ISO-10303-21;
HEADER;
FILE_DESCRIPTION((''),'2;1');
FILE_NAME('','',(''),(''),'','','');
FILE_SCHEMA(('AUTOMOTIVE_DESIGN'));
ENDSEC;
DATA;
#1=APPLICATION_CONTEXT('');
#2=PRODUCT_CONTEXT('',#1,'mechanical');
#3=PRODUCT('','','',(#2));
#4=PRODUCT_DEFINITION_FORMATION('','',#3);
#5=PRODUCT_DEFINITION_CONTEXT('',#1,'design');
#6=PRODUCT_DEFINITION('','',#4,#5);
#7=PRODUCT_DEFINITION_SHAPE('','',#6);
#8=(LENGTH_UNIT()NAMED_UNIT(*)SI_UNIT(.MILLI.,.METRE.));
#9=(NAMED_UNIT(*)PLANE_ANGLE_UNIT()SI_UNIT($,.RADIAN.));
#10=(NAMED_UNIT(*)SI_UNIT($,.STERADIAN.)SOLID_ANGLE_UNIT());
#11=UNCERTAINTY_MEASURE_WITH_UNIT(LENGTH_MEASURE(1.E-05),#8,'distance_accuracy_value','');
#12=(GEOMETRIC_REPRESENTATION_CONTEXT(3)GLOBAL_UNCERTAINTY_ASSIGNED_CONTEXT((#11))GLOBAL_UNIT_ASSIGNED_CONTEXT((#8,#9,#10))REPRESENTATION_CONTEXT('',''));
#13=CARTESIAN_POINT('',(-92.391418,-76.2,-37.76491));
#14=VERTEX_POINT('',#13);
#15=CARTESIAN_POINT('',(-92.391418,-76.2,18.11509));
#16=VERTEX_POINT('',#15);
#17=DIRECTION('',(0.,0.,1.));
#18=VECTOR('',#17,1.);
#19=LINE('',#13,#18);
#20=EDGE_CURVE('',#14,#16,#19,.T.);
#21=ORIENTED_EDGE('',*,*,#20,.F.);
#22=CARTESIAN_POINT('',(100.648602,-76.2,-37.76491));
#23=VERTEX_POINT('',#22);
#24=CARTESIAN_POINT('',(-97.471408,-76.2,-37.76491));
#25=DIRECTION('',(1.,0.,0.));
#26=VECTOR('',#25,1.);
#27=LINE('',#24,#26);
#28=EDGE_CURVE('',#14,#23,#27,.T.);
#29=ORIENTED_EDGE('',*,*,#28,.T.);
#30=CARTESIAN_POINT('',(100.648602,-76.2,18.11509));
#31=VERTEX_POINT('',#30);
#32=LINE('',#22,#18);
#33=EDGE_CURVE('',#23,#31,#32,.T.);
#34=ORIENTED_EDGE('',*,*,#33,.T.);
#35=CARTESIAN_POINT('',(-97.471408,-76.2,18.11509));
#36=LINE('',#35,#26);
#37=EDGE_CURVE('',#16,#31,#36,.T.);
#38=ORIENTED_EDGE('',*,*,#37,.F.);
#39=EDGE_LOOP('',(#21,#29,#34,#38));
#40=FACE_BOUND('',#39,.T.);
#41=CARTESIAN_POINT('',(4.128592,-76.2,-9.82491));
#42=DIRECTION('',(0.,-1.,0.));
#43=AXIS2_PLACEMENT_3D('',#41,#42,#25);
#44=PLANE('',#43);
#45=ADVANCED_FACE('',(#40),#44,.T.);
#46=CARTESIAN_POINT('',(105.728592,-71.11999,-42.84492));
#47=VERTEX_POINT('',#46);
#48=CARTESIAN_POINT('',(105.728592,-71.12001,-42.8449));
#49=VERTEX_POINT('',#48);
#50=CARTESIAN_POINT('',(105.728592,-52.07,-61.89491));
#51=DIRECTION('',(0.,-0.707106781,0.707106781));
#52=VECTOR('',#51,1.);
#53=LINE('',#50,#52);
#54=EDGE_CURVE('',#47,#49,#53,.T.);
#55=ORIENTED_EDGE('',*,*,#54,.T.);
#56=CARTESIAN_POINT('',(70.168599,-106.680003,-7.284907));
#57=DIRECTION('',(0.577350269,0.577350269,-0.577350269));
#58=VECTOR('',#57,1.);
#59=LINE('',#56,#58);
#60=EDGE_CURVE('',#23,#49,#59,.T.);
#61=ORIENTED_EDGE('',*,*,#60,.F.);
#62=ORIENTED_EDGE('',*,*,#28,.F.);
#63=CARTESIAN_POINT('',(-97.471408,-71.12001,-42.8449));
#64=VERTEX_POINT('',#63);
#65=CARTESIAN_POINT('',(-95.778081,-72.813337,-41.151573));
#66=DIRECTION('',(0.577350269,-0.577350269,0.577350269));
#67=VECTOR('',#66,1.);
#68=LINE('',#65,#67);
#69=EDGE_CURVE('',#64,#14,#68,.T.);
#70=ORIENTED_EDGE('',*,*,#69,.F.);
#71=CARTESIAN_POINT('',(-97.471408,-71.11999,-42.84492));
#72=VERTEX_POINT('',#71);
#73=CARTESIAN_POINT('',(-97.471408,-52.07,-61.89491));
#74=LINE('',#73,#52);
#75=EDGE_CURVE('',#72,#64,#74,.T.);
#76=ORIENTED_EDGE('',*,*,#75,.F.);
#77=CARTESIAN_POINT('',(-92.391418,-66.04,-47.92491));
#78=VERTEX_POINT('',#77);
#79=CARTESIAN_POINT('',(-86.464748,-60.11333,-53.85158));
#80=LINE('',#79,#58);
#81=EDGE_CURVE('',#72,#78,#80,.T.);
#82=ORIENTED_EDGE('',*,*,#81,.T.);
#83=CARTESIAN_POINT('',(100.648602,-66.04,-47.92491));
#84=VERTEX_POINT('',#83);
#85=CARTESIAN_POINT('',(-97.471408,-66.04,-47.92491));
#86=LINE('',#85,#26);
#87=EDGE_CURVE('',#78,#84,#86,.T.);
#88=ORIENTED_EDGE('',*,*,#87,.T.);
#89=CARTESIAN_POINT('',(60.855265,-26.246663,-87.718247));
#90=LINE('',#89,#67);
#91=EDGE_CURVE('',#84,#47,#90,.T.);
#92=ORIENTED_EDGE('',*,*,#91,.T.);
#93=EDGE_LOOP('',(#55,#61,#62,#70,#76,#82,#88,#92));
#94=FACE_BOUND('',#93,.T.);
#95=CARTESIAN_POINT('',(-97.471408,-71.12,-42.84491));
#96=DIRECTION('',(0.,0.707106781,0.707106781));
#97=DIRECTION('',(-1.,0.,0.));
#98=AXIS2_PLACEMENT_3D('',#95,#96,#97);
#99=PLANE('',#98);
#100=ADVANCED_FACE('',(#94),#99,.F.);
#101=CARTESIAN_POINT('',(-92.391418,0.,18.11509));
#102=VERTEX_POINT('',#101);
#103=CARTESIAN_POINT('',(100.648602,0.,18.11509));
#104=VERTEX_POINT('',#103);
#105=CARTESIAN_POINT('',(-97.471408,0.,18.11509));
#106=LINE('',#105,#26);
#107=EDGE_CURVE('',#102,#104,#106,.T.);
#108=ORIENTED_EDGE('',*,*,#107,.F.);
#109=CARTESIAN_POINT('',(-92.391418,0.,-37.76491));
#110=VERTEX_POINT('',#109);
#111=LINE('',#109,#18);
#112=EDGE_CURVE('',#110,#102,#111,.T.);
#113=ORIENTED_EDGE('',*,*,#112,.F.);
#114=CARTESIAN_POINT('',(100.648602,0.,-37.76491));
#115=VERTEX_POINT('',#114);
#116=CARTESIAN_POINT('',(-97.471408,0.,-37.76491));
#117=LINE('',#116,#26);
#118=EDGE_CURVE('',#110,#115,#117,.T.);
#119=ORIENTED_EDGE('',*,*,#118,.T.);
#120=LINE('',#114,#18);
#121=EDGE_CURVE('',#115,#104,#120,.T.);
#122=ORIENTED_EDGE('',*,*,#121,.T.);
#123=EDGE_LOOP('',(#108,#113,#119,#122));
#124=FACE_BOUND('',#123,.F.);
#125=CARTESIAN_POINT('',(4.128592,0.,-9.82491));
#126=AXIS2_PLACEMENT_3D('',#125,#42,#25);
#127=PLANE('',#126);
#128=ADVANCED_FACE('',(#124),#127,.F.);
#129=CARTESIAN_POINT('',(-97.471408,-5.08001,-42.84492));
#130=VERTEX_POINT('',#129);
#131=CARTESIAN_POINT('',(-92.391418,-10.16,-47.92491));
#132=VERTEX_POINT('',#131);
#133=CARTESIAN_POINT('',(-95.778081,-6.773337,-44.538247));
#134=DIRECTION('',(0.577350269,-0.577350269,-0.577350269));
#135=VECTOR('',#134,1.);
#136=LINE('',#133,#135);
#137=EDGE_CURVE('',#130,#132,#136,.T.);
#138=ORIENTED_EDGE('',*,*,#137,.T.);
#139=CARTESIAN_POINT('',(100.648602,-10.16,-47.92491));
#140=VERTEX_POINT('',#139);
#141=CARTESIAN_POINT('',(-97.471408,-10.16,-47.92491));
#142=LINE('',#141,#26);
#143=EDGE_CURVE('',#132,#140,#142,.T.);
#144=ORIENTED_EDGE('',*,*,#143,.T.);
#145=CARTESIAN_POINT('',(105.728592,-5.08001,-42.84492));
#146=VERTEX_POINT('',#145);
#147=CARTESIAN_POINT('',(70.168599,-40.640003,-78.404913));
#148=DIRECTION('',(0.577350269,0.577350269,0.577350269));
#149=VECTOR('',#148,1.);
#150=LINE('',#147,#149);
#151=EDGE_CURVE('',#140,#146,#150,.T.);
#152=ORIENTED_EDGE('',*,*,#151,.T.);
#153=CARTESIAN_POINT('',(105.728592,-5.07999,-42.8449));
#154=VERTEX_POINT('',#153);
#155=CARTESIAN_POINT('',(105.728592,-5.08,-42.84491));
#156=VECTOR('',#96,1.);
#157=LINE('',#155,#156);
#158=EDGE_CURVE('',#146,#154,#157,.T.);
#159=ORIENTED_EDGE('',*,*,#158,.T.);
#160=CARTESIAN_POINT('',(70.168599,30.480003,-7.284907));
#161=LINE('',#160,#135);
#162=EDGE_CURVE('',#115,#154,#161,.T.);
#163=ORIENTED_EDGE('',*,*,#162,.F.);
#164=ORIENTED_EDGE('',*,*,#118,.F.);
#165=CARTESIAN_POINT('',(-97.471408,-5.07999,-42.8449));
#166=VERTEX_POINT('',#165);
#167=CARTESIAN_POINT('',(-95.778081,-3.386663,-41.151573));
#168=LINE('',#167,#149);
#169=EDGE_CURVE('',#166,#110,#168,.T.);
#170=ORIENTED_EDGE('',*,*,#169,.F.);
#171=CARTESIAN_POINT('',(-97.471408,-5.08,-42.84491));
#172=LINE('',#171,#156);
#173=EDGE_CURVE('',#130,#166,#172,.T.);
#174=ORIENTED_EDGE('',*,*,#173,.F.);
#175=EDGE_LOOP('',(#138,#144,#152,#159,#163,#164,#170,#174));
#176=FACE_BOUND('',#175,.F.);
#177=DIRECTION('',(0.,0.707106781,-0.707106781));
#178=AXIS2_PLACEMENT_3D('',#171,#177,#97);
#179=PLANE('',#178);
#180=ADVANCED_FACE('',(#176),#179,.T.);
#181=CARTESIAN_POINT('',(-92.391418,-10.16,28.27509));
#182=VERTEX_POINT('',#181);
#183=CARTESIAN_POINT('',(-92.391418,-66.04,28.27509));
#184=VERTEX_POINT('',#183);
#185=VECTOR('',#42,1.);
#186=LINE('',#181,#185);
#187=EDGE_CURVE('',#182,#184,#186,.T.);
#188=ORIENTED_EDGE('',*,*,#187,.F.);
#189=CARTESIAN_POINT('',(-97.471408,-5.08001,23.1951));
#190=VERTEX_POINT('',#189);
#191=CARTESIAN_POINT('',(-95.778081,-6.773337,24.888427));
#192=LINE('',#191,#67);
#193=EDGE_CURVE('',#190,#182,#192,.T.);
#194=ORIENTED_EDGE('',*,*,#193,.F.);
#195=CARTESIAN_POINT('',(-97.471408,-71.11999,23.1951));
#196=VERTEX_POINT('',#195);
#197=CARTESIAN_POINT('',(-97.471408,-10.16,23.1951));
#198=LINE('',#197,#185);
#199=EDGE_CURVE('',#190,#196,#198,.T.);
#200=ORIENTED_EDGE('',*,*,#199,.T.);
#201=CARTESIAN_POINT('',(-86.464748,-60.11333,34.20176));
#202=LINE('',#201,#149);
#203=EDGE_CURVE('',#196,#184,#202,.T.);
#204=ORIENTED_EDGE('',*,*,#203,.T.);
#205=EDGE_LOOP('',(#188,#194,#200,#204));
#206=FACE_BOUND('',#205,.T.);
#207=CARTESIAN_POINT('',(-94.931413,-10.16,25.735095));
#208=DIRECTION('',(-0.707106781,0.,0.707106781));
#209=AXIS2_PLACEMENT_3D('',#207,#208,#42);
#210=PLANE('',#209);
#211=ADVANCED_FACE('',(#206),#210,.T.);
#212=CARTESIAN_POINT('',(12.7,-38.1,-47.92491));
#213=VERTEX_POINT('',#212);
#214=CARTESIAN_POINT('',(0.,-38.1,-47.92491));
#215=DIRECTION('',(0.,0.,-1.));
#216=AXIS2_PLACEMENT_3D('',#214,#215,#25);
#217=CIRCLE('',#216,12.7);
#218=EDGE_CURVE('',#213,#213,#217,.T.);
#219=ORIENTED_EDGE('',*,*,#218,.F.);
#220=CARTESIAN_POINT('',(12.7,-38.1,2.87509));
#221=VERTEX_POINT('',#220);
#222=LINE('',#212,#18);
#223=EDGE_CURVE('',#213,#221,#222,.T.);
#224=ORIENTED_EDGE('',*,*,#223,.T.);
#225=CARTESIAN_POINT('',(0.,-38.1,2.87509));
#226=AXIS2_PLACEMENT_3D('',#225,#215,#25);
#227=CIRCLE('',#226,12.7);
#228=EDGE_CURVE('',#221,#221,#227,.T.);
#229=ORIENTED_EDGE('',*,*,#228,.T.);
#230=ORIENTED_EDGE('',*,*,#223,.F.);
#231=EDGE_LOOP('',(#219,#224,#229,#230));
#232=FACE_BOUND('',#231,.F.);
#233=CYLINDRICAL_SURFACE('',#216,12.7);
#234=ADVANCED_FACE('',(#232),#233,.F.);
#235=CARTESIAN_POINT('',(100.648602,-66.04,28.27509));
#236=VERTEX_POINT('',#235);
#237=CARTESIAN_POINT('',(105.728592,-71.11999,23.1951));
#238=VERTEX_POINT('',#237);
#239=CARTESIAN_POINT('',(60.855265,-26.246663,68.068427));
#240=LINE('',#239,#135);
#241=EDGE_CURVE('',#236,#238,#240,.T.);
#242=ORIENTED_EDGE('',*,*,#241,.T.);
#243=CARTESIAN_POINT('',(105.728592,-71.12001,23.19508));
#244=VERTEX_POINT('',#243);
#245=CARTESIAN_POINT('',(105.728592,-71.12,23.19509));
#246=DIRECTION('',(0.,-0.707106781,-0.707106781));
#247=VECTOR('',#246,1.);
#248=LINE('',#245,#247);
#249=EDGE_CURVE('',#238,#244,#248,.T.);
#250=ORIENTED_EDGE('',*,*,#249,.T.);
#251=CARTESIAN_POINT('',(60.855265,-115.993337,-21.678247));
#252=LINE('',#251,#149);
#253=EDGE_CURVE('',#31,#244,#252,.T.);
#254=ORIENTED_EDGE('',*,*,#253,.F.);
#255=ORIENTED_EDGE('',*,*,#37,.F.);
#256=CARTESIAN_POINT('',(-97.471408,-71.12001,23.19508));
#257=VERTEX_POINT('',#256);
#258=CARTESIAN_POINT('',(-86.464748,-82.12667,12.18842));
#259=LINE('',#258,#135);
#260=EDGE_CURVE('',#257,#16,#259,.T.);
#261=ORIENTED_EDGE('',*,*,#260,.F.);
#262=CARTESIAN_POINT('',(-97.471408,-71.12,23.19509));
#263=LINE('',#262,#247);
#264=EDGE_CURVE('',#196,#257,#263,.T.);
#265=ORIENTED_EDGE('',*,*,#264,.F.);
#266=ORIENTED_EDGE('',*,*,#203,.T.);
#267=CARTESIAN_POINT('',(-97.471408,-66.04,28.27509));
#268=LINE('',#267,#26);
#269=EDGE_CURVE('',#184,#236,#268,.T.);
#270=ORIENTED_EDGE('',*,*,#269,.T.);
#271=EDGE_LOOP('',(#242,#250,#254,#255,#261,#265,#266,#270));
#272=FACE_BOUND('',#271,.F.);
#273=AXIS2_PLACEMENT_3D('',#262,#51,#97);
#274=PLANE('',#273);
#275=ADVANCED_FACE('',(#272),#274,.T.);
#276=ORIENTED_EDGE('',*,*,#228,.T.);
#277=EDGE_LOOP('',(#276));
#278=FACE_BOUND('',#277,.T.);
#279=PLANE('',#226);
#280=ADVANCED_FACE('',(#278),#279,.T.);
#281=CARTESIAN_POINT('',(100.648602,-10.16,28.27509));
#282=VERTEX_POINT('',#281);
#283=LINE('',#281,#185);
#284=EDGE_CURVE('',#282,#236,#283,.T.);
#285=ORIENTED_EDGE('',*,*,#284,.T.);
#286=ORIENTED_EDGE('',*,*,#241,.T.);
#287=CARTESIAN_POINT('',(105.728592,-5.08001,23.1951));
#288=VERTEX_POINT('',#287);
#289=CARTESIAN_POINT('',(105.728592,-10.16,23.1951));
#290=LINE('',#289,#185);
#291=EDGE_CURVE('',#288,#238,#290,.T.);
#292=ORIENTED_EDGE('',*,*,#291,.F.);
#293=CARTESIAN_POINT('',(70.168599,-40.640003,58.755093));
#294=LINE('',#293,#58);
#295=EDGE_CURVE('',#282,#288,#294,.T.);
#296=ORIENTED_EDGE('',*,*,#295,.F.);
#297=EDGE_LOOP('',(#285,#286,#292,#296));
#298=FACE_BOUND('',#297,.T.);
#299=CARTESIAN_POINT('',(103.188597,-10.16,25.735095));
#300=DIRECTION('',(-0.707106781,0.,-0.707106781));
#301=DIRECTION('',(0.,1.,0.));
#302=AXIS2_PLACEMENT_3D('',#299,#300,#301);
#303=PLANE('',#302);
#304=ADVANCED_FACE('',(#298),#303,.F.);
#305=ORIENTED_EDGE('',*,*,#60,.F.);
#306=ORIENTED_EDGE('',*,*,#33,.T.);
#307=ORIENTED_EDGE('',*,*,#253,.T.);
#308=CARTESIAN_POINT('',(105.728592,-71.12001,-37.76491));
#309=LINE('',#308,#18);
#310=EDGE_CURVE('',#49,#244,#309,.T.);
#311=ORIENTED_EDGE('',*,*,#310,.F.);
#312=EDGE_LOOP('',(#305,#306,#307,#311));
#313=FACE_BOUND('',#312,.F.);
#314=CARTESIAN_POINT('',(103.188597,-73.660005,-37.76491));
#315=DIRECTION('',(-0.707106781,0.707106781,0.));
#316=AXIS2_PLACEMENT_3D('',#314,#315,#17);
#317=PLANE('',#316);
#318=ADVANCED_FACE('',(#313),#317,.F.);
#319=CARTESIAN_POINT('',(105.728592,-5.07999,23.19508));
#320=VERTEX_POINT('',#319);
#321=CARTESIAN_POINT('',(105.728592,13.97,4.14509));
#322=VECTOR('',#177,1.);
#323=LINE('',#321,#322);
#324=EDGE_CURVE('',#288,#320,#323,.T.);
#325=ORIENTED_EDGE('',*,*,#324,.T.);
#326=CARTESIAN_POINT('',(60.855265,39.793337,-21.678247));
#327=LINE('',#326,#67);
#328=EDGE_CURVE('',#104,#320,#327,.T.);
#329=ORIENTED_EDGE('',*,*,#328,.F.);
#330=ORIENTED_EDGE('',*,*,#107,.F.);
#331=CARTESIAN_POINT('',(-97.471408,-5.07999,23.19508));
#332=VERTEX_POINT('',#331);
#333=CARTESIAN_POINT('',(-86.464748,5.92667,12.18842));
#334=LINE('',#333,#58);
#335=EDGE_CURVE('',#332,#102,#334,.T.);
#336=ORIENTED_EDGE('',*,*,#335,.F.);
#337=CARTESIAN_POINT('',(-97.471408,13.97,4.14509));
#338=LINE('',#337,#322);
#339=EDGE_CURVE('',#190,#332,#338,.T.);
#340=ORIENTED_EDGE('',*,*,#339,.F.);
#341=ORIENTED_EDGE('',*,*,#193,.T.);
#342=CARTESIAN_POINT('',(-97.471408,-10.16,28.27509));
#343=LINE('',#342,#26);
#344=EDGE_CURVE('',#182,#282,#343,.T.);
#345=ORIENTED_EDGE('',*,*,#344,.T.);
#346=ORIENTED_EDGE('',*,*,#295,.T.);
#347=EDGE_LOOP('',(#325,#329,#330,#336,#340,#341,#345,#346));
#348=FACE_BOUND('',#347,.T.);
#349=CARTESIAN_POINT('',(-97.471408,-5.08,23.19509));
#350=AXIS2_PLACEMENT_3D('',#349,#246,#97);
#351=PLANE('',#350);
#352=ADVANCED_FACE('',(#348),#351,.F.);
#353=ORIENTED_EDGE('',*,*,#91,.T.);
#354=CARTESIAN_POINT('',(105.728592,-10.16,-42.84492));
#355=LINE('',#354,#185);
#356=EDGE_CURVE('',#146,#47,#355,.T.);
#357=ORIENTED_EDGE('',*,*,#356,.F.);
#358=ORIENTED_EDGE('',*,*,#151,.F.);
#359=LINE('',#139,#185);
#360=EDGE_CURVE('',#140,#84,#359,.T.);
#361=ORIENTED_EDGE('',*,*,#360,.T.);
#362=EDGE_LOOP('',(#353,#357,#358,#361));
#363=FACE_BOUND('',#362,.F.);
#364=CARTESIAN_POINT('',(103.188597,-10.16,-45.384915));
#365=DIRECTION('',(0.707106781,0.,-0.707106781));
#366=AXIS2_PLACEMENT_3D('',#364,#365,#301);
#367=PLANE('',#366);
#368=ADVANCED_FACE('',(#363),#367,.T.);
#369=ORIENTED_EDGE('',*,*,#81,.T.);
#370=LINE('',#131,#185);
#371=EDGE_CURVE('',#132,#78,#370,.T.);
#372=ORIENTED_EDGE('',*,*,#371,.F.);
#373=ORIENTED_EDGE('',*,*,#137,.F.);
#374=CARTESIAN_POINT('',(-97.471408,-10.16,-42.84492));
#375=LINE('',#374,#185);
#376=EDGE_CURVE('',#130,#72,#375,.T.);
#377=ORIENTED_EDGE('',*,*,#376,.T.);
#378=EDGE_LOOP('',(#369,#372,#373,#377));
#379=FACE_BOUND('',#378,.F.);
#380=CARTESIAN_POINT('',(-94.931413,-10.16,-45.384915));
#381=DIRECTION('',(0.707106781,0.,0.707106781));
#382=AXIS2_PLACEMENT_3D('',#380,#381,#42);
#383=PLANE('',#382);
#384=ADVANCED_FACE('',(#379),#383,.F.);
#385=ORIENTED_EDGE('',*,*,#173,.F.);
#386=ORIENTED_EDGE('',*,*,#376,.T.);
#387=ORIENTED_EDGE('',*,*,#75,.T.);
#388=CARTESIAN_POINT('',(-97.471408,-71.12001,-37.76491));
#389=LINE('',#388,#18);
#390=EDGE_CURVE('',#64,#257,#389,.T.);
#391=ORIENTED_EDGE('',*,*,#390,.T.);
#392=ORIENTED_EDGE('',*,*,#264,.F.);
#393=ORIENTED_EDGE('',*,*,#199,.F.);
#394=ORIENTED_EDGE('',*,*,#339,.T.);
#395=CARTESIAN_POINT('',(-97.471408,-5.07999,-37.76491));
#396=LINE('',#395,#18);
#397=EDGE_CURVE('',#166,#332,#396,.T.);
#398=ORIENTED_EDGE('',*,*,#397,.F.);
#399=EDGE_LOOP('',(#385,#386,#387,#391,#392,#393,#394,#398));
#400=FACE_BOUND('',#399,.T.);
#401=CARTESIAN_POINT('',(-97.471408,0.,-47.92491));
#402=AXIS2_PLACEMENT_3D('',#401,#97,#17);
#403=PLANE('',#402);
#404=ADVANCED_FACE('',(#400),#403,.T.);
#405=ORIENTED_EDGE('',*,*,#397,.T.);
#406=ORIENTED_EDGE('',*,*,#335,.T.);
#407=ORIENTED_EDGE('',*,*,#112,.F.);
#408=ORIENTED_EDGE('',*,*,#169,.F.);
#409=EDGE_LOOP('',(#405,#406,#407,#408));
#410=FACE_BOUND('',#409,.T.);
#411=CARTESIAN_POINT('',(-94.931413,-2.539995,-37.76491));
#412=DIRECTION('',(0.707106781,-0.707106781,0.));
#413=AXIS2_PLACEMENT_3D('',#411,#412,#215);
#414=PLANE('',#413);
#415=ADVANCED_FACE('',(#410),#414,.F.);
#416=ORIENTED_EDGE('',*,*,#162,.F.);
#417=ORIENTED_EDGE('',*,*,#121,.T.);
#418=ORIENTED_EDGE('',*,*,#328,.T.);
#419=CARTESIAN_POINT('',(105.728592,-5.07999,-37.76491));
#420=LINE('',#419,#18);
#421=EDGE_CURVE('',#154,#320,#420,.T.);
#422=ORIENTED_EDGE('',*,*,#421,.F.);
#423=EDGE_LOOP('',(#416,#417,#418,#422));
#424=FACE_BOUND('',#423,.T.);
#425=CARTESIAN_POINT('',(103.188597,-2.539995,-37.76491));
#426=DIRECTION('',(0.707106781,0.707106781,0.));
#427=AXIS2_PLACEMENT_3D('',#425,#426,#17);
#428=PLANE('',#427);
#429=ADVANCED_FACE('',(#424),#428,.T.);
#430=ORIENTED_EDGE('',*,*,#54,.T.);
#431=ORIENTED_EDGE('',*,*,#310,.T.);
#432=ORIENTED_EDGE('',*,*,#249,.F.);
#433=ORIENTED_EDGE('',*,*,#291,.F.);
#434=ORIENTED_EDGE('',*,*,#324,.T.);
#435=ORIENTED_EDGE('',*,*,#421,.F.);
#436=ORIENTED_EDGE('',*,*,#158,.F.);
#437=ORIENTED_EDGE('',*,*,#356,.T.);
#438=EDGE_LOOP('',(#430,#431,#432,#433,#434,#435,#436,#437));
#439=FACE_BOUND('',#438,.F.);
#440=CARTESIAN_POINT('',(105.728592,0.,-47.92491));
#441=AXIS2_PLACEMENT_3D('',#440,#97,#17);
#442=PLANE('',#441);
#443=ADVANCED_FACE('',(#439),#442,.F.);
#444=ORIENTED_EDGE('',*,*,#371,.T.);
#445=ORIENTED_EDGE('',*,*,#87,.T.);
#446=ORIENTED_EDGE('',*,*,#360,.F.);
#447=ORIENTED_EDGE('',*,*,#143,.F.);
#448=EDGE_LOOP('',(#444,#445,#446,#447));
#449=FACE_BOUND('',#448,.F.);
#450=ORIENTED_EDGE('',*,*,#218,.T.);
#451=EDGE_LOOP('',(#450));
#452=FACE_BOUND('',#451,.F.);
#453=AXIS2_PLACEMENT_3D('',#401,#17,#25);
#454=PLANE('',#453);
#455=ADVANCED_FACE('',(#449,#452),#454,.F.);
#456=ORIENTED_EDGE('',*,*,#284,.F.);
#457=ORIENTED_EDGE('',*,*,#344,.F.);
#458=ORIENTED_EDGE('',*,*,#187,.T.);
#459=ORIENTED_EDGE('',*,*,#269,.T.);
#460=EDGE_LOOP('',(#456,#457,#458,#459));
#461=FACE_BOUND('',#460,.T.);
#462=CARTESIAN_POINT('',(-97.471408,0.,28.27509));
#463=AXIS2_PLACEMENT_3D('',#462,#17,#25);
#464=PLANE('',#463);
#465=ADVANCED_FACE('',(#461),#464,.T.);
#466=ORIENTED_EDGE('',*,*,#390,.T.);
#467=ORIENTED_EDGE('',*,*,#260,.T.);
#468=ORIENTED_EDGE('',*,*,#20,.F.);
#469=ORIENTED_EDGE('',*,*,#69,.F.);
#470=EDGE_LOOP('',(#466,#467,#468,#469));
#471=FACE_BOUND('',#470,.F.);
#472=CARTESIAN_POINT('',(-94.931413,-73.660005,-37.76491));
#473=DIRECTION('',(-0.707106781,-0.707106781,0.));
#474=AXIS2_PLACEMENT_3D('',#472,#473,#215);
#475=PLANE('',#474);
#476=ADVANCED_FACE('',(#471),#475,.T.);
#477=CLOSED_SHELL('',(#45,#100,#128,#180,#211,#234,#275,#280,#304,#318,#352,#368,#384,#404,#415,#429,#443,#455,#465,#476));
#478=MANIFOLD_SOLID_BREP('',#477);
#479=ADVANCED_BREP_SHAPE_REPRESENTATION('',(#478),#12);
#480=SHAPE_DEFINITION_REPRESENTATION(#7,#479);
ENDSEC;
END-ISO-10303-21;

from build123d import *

# Parameters (mm, degrees)
F0_W     = 203.2
F0_H     = 76.2
F1_DEPTH = 76.2
F2_SIZE  = 10.16
F3_SIZE  = 5.07999
F4_R     = 12.7
F5_DEPTH = 50.8


# Not quite as in the source:
# - a fillet or chamfer is up to 0.001 mm smaller than in the source, because OpenCascade refuses the exact size


with BuildPart() as f1:
    # F0 (on Front) → F1 (new body)
    with BuildSketch(Plane.XZ):
        with Locations((4.1285920888, -9.8249100385)):
            Rectangle(F0_W, F0_H)
    extrude(amount=F1_DEPTH)

    # F2
    f2_edges = [f1.edges().sort_by_distance(p)[0] for p in [
        (4.128592, -76.2, 28.27509),
        (4.128592, -76.2, -47.92491),
        (4.128592, 0, 28.27509),
        (4.128592, 0, -47.92491),
    ]]
    chamfer(f2_edges, length=F2_SIZE)

    # F3 (size 5.08 in the source; OpenCascade refuses exactly that, so slightly less here)
    f3_edges = [f1.edges().sort_by_distance(p)[0] for p in [
        (-97.471408, -38.1, 28.27509),
        (-97.471408, -76.2, -9.82491),
        (-97.471408, -38.1, -47.92491),
        (-97.471408, 0, -9.82491),
        (105.728592, 0, -9.82491),
        (105.728592, -38.1, -47.92491),
        (105.728592, -76.2, -9.82491),
        (105.728592, -38.1, 28.27509),
    ]]
    chamfer(f3_edges, length=F3_SIZE)

    # F4 (on face) → F5 (cut)
    with BuildSketch(Plane(origin=(0, 0, -47.9249100385), x_dir=(1, 0, 0), z_dir=(0, 0, -1))):
        with Locations((0, 38.1)):
            Circle(F4_R)
    extrude(amount=-F5_DEPTH, mode=Mode.SUBTRACT)


solid = f1.part
